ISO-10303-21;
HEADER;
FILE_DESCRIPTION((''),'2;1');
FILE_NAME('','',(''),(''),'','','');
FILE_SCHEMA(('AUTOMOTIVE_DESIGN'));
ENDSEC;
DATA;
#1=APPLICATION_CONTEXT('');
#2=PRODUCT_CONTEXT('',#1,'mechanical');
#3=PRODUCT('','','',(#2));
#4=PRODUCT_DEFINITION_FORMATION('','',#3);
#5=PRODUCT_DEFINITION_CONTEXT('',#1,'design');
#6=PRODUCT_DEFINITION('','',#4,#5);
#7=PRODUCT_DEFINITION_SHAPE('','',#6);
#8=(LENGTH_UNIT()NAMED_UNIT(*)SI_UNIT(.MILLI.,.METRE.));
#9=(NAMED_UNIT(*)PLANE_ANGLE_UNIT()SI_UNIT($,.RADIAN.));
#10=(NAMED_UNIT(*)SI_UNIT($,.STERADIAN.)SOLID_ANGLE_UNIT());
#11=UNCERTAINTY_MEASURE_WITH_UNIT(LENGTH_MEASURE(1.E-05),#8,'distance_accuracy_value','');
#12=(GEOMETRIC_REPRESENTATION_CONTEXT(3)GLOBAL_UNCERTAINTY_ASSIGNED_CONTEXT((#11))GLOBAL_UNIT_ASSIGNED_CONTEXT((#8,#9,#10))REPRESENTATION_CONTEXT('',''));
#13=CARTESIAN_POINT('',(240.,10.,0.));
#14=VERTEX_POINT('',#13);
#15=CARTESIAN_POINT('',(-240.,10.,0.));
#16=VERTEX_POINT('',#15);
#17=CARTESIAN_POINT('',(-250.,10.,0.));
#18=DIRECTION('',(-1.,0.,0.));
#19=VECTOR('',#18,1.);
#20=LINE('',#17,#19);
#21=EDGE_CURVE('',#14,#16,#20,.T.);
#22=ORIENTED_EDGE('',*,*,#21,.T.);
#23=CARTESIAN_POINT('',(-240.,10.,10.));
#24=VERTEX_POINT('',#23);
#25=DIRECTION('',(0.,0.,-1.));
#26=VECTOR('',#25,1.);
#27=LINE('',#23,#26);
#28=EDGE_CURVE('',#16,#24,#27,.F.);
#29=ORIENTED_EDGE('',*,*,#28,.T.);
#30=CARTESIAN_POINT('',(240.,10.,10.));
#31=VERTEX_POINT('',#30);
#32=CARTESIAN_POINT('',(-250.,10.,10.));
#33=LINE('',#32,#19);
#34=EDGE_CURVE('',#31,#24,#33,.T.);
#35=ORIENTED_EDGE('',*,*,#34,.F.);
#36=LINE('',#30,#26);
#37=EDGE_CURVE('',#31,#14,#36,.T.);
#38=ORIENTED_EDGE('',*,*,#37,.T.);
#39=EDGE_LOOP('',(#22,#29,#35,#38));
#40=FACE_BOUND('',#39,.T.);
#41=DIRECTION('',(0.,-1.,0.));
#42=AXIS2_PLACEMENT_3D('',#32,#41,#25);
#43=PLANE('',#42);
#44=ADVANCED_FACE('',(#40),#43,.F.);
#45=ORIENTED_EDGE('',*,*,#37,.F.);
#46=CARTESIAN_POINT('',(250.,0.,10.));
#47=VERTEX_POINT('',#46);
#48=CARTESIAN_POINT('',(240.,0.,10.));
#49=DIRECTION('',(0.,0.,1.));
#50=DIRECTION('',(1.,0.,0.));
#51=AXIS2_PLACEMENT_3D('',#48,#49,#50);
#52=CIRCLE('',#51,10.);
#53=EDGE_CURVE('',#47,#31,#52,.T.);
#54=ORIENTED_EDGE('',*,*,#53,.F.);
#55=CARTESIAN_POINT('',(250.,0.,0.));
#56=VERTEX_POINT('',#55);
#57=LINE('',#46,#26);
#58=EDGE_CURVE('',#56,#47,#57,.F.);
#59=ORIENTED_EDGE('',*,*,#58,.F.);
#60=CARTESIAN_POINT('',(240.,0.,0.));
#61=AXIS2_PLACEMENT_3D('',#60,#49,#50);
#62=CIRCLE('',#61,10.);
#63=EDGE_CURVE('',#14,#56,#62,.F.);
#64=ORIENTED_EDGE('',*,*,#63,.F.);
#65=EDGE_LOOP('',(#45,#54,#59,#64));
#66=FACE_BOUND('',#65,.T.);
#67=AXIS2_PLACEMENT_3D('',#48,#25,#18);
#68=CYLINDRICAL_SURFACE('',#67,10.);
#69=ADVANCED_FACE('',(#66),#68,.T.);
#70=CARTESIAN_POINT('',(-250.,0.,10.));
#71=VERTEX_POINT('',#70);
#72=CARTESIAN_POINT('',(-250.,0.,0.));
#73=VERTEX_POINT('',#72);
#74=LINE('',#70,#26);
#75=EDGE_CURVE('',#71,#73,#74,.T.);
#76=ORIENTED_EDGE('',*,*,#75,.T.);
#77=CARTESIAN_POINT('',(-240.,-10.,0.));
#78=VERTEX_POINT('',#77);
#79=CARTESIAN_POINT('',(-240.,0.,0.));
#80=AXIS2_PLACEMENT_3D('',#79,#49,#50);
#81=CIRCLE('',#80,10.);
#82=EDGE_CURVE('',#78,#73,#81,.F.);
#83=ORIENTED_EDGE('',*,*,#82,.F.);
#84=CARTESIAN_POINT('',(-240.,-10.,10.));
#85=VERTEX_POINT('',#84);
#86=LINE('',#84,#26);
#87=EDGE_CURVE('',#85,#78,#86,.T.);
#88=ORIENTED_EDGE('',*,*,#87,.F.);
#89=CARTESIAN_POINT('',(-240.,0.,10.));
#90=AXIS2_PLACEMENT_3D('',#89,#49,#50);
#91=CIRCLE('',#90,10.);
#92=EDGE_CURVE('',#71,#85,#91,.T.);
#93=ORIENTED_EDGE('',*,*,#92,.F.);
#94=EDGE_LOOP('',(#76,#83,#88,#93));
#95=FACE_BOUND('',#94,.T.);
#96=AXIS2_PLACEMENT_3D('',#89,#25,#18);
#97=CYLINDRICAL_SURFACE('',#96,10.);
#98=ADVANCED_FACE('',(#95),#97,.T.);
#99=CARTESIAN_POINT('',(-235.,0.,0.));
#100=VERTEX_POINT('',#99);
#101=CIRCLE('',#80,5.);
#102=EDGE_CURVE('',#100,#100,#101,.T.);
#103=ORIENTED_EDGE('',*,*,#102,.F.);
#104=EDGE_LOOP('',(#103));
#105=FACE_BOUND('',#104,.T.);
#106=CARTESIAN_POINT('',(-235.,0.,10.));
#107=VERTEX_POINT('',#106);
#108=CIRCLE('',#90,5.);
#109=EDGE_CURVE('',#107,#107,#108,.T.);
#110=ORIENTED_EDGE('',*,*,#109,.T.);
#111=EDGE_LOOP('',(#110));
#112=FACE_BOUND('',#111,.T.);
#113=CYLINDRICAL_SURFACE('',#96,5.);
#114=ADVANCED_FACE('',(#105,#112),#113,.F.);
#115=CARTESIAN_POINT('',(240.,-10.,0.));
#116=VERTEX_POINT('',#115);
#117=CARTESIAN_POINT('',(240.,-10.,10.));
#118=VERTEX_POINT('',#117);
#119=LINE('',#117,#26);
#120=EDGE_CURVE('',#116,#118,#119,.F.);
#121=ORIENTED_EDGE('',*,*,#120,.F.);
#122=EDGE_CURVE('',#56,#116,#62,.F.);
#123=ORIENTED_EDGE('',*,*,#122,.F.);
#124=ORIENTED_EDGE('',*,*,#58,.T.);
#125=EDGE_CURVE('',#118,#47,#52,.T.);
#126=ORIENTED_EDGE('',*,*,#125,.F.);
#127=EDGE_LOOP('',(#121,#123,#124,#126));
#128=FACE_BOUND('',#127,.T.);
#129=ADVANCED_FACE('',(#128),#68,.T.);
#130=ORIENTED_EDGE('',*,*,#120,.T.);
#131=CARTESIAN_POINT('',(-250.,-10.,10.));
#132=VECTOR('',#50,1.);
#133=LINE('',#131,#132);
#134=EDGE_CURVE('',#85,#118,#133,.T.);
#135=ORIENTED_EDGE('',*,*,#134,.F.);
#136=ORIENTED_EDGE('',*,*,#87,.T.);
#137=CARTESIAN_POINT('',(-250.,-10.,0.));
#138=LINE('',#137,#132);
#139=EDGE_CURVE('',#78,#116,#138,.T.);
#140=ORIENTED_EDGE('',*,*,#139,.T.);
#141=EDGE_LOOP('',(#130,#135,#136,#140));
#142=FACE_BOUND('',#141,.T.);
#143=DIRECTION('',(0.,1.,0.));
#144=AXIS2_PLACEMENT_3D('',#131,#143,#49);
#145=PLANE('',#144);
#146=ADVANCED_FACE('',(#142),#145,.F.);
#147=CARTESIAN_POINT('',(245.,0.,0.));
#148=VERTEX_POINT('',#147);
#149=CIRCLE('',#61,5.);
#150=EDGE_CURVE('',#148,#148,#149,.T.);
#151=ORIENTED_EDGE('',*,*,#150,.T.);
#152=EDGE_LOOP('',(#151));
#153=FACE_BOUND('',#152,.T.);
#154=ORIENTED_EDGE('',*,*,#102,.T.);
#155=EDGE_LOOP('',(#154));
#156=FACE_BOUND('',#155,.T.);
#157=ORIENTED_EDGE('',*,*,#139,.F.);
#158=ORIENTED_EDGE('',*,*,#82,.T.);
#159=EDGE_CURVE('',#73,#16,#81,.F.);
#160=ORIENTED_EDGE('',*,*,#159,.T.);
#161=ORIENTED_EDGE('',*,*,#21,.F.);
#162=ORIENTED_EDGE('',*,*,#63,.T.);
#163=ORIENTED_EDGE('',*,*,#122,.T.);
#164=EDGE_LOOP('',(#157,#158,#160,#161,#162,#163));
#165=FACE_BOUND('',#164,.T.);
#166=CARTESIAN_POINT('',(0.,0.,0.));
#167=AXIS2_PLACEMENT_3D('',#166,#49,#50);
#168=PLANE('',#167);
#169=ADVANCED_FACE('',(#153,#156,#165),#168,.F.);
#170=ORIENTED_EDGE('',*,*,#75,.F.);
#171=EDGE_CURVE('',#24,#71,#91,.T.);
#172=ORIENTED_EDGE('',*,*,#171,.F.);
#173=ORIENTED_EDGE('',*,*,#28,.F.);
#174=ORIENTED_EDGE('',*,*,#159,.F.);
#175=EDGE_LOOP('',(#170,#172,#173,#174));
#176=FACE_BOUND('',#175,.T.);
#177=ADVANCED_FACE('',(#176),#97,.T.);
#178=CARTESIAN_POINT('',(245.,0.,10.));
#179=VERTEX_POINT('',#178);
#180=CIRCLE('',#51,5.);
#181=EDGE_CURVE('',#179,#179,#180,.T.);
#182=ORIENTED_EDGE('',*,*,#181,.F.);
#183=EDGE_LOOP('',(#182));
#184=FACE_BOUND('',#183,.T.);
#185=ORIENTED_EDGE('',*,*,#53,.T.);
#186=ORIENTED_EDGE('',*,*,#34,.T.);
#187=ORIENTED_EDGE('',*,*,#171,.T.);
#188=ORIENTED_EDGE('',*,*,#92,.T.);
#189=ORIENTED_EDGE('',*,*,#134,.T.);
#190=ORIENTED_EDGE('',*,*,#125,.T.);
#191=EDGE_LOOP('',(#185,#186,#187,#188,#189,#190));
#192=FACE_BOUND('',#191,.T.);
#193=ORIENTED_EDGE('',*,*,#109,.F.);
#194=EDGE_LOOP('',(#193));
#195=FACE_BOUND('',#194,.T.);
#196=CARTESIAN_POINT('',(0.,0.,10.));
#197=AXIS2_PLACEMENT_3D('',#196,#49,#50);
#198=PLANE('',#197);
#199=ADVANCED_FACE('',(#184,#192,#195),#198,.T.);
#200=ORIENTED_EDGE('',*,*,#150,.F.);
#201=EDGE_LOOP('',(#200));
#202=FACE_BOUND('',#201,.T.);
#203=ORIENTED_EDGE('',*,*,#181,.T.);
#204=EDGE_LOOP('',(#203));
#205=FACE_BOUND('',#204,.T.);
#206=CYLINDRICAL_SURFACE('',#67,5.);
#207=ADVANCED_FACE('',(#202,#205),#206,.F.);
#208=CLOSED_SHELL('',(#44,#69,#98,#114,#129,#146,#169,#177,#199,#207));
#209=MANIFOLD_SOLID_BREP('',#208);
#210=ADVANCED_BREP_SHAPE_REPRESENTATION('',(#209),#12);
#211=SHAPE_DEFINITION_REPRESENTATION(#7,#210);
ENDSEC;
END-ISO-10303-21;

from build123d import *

# Parameters (mm, degrees)
SKETCH1_W           = 500
SKETCH1_H           = 20
SKETCH1_R           = 5
BOSS_EXTRUDE1_DEPTH = 10
FILLET1_R           = 10


with BuildPart() as part:
    # Sketch1 → Boss-Extrude1 (new body)
    with BuildSketch(Plane.XY):
        Rectangle(SKETCH1_W, SKETCH1_H)
        with Locations((-240, 0)):
            Circle(SKETCH1_R, mode=Mode.SUBTRACT)
        with Locations((240, 0)):
            Circle(SKETCH1_R, mode=Mode.SUBTRACT)
    extrude(amount=BOSS_EXTRUDE1_DEPTH)

    # Fillet1
    fillet1_edges = [part.edges().sort_by_distance(p)[0] for p in [
        (250, -10, 5),
        (250, 10, 5),
        (-250, -10, 5),
        (-250, 10, 5),
    ]]
    fillet(fillet1_edges, radius=FILLET1_R - 0.0001)  # a hair under: the kernel refuses the full size


solid = part.part
